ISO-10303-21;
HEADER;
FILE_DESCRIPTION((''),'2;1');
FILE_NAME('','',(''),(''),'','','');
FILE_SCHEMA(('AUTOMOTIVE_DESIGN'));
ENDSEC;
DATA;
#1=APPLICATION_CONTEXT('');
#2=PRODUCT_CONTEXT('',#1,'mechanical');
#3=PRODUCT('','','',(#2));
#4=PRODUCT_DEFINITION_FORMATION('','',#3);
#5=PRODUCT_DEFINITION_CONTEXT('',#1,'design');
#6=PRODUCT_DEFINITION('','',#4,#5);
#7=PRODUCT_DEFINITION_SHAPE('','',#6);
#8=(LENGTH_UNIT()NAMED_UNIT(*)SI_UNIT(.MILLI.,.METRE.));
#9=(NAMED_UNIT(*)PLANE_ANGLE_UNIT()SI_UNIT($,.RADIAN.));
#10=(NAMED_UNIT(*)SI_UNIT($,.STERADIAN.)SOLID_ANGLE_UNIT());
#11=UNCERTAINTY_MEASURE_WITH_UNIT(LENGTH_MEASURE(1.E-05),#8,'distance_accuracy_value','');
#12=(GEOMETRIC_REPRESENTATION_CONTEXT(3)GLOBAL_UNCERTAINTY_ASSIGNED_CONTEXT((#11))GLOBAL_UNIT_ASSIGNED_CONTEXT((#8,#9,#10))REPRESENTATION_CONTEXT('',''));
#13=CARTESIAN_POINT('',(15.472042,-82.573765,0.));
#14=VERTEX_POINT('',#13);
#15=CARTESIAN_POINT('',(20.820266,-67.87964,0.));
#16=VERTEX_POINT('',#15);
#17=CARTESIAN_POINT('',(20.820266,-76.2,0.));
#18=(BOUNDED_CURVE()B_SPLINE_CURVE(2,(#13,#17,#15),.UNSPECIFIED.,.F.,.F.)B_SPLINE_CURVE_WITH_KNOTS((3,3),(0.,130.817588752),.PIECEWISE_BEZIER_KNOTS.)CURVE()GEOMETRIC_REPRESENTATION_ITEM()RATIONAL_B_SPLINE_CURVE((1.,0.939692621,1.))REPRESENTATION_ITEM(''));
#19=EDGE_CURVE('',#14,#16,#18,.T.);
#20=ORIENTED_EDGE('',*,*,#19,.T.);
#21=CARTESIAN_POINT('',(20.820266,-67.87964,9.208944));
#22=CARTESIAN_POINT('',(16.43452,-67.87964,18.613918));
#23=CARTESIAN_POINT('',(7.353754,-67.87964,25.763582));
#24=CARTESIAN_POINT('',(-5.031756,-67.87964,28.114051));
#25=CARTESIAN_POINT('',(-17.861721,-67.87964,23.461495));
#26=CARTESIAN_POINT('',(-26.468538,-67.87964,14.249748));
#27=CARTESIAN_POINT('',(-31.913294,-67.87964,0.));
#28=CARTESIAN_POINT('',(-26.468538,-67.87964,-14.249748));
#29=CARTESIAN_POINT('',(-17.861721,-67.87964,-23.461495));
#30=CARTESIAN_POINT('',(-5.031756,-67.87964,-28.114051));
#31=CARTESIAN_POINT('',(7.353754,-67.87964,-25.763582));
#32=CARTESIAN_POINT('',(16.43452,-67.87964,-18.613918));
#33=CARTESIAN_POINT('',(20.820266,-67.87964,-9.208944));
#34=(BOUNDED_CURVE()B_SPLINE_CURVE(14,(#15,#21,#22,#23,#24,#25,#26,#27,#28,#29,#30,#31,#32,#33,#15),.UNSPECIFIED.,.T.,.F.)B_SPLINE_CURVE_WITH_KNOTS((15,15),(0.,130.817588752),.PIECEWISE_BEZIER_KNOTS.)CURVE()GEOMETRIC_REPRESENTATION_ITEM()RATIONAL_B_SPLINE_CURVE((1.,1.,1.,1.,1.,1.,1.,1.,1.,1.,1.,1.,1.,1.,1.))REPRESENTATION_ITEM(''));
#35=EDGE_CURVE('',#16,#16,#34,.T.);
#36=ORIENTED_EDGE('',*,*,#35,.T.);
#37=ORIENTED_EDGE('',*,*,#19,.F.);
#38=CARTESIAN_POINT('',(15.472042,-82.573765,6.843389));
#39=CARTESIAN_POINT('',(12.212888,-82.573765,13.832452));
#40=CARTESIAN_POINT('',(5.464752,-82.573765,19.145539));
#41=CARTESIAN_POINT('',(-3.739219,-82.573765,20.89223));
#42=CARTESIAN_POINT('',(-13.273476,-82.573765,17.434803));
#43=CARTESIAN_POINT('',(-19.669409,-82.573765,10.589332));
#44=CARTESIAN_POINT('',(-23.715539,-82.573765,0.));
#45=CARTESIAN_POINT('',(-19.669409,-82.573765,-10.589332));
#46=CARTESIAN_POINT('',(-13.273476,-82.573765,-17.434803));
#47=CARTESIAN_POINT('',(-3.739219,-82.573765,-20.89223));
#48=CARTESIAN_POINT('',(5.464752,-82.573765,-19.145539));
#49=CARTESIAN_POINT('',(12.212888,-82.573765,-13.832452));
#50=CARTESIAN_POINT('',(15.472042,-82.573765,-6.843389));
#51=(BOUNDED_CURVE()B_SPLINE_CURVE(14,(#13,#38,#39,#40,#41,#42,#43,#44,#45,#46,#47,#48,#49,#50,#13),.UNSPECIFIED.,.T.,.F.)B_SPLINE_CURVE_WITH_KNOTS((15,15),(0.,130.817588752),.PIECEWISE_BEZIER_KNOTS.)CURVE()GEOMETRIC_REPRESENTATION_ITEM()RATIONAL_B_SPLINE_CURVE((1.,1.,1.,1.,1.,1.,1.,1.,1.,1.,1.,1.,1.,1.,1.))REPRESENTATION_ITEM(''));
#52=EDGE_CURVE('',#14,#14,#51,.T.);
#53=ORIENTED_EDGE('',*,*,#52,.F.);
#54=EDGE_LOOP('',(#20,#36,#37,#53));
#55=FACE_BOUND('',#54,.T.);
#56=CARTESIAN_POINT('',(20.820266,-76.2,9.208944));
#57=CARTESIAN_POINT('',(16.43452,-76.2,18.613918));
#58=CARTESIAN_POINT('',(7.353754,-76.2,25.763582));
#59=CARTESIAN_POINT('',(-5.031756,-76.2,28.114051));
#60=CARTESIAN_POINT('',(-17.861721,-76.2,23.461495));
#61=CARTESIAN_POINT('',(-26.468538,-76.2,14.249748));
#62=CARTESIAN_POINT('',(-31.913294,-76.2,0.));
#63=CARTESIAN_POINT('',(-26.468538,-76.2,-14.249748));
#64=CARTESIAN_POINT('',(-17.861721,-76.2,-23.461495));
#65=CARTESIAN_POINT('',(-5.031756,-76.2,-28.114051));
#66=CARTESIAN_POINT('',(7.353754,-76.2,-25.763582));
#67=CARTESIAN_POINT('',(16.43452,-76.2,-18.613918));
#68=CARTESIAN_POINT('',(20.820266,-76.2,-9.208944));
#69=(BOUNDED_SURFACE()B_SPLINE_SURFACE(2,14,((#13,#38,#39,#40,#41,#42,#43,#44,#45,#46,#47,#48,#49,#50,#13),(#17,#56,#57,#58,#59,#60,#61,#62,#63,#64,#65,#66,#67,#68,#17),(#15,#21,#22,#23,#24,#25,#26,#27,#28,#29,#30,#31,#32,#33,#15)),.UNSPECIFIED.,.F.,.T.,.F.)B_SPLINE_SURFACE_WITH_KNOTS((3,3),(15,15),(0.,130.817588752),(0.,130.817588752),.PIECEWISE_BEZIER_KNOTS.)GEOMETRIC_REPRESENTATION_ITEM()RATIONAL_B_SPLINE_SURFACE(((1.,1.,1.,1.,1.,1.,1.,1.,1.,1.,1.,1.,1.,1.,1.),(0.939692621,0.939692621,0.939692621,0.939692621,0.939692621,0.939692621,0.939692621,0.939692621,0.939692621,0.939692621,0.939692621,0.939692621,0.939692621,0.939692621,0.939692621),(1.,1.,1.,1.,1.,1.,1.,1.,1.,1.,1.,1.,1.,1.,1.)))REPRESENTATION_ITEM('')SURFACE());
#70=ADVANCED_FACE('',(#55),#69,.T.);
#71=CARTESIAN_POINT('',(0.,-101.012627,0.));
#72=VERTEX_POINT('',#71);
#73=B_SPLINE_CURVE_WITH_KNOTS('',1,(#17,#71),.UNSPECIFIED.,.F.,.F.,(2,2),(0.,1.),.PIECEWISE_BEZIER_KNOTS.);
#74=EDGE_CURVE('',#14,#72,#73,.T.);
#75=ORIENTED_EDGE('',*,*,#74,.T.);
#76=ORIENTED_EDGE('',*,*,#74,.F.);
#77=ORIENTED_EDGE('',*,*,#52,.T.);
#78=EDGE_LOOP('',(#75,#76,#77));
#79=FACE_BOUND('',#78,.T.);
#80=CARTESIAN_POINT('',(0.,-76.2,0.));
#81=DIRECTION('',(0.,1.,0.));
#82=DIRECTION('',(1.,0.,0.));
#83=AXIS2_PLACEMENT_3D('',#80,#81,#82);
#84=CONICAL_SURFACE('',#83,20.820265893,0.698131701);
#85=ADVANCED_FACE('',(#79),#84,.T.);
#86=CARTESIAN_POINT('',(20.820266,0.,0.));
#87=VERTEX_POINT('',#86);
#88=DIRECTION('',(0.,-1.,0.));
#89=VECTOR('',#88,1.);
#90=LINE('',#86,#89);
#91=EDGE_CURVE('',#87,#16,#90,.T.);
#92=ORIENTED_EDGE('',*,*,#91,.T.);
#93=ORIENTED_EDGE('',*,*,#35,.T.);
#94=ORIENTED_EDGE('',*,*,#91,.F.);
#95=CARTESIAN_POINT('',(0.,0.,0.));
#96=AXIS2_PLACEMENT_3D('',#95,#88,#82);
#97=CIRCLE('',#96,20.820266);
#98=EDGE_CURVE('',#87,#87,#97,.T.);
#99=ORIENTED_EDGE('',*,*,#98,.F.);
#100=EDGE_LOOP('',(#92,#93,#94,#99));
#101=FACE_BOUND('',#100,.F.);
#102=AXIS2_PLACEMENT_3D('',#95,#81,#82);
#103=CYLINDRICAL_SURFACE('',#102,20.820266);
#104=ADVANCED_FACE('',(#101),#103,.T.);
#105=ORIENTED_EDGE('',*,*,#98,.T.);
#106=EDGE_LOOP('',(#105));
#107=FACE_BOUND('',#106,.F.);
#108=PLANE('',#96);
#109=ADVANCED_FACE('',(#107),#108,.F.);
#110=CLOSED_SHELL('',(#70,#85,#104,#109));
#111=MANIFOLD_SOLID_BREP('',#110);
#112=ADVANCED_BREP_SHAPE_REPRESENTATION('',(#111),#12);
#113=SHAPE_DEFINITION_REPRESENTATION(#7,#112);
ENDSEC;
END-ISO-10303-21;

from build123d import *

# Parameters (mm, degrees)
F0_R      = 20.8202658932
F1_DEPTH  = 76.2
F1_FACE_R = 20.8202658932
F3_R      = 22.86


# Not quite as in the source:
# - an extrude whose draft closes it to a point is written as a loft to that point


with BuildPart() as f1:
    # F0 (on Front) → F1 (new body)
    with BuildSketch(Plane.XZ):
        Circle(F0_R)
    extrude(amount=F1_DEPTH)

    # F1_face (on face) → F2 section 0
    with BuildSketch(Plane.XZ.offset(76.2), mode=Mode.PRIVATE) as f2_s0:
        Circle(F1_FACE_R)
    loft([f2_s0.sketch, Vertex(0, -101.0126266769, 0)], ruled=True)

    # F3
    f3_edges = [f1.edges().sort_by_distance(p)[0] for p in [
        (-20.820266, -76.2, 0),
    ]]
    fillet(f3_edges, radius=F3_R)


solid = f1.part
